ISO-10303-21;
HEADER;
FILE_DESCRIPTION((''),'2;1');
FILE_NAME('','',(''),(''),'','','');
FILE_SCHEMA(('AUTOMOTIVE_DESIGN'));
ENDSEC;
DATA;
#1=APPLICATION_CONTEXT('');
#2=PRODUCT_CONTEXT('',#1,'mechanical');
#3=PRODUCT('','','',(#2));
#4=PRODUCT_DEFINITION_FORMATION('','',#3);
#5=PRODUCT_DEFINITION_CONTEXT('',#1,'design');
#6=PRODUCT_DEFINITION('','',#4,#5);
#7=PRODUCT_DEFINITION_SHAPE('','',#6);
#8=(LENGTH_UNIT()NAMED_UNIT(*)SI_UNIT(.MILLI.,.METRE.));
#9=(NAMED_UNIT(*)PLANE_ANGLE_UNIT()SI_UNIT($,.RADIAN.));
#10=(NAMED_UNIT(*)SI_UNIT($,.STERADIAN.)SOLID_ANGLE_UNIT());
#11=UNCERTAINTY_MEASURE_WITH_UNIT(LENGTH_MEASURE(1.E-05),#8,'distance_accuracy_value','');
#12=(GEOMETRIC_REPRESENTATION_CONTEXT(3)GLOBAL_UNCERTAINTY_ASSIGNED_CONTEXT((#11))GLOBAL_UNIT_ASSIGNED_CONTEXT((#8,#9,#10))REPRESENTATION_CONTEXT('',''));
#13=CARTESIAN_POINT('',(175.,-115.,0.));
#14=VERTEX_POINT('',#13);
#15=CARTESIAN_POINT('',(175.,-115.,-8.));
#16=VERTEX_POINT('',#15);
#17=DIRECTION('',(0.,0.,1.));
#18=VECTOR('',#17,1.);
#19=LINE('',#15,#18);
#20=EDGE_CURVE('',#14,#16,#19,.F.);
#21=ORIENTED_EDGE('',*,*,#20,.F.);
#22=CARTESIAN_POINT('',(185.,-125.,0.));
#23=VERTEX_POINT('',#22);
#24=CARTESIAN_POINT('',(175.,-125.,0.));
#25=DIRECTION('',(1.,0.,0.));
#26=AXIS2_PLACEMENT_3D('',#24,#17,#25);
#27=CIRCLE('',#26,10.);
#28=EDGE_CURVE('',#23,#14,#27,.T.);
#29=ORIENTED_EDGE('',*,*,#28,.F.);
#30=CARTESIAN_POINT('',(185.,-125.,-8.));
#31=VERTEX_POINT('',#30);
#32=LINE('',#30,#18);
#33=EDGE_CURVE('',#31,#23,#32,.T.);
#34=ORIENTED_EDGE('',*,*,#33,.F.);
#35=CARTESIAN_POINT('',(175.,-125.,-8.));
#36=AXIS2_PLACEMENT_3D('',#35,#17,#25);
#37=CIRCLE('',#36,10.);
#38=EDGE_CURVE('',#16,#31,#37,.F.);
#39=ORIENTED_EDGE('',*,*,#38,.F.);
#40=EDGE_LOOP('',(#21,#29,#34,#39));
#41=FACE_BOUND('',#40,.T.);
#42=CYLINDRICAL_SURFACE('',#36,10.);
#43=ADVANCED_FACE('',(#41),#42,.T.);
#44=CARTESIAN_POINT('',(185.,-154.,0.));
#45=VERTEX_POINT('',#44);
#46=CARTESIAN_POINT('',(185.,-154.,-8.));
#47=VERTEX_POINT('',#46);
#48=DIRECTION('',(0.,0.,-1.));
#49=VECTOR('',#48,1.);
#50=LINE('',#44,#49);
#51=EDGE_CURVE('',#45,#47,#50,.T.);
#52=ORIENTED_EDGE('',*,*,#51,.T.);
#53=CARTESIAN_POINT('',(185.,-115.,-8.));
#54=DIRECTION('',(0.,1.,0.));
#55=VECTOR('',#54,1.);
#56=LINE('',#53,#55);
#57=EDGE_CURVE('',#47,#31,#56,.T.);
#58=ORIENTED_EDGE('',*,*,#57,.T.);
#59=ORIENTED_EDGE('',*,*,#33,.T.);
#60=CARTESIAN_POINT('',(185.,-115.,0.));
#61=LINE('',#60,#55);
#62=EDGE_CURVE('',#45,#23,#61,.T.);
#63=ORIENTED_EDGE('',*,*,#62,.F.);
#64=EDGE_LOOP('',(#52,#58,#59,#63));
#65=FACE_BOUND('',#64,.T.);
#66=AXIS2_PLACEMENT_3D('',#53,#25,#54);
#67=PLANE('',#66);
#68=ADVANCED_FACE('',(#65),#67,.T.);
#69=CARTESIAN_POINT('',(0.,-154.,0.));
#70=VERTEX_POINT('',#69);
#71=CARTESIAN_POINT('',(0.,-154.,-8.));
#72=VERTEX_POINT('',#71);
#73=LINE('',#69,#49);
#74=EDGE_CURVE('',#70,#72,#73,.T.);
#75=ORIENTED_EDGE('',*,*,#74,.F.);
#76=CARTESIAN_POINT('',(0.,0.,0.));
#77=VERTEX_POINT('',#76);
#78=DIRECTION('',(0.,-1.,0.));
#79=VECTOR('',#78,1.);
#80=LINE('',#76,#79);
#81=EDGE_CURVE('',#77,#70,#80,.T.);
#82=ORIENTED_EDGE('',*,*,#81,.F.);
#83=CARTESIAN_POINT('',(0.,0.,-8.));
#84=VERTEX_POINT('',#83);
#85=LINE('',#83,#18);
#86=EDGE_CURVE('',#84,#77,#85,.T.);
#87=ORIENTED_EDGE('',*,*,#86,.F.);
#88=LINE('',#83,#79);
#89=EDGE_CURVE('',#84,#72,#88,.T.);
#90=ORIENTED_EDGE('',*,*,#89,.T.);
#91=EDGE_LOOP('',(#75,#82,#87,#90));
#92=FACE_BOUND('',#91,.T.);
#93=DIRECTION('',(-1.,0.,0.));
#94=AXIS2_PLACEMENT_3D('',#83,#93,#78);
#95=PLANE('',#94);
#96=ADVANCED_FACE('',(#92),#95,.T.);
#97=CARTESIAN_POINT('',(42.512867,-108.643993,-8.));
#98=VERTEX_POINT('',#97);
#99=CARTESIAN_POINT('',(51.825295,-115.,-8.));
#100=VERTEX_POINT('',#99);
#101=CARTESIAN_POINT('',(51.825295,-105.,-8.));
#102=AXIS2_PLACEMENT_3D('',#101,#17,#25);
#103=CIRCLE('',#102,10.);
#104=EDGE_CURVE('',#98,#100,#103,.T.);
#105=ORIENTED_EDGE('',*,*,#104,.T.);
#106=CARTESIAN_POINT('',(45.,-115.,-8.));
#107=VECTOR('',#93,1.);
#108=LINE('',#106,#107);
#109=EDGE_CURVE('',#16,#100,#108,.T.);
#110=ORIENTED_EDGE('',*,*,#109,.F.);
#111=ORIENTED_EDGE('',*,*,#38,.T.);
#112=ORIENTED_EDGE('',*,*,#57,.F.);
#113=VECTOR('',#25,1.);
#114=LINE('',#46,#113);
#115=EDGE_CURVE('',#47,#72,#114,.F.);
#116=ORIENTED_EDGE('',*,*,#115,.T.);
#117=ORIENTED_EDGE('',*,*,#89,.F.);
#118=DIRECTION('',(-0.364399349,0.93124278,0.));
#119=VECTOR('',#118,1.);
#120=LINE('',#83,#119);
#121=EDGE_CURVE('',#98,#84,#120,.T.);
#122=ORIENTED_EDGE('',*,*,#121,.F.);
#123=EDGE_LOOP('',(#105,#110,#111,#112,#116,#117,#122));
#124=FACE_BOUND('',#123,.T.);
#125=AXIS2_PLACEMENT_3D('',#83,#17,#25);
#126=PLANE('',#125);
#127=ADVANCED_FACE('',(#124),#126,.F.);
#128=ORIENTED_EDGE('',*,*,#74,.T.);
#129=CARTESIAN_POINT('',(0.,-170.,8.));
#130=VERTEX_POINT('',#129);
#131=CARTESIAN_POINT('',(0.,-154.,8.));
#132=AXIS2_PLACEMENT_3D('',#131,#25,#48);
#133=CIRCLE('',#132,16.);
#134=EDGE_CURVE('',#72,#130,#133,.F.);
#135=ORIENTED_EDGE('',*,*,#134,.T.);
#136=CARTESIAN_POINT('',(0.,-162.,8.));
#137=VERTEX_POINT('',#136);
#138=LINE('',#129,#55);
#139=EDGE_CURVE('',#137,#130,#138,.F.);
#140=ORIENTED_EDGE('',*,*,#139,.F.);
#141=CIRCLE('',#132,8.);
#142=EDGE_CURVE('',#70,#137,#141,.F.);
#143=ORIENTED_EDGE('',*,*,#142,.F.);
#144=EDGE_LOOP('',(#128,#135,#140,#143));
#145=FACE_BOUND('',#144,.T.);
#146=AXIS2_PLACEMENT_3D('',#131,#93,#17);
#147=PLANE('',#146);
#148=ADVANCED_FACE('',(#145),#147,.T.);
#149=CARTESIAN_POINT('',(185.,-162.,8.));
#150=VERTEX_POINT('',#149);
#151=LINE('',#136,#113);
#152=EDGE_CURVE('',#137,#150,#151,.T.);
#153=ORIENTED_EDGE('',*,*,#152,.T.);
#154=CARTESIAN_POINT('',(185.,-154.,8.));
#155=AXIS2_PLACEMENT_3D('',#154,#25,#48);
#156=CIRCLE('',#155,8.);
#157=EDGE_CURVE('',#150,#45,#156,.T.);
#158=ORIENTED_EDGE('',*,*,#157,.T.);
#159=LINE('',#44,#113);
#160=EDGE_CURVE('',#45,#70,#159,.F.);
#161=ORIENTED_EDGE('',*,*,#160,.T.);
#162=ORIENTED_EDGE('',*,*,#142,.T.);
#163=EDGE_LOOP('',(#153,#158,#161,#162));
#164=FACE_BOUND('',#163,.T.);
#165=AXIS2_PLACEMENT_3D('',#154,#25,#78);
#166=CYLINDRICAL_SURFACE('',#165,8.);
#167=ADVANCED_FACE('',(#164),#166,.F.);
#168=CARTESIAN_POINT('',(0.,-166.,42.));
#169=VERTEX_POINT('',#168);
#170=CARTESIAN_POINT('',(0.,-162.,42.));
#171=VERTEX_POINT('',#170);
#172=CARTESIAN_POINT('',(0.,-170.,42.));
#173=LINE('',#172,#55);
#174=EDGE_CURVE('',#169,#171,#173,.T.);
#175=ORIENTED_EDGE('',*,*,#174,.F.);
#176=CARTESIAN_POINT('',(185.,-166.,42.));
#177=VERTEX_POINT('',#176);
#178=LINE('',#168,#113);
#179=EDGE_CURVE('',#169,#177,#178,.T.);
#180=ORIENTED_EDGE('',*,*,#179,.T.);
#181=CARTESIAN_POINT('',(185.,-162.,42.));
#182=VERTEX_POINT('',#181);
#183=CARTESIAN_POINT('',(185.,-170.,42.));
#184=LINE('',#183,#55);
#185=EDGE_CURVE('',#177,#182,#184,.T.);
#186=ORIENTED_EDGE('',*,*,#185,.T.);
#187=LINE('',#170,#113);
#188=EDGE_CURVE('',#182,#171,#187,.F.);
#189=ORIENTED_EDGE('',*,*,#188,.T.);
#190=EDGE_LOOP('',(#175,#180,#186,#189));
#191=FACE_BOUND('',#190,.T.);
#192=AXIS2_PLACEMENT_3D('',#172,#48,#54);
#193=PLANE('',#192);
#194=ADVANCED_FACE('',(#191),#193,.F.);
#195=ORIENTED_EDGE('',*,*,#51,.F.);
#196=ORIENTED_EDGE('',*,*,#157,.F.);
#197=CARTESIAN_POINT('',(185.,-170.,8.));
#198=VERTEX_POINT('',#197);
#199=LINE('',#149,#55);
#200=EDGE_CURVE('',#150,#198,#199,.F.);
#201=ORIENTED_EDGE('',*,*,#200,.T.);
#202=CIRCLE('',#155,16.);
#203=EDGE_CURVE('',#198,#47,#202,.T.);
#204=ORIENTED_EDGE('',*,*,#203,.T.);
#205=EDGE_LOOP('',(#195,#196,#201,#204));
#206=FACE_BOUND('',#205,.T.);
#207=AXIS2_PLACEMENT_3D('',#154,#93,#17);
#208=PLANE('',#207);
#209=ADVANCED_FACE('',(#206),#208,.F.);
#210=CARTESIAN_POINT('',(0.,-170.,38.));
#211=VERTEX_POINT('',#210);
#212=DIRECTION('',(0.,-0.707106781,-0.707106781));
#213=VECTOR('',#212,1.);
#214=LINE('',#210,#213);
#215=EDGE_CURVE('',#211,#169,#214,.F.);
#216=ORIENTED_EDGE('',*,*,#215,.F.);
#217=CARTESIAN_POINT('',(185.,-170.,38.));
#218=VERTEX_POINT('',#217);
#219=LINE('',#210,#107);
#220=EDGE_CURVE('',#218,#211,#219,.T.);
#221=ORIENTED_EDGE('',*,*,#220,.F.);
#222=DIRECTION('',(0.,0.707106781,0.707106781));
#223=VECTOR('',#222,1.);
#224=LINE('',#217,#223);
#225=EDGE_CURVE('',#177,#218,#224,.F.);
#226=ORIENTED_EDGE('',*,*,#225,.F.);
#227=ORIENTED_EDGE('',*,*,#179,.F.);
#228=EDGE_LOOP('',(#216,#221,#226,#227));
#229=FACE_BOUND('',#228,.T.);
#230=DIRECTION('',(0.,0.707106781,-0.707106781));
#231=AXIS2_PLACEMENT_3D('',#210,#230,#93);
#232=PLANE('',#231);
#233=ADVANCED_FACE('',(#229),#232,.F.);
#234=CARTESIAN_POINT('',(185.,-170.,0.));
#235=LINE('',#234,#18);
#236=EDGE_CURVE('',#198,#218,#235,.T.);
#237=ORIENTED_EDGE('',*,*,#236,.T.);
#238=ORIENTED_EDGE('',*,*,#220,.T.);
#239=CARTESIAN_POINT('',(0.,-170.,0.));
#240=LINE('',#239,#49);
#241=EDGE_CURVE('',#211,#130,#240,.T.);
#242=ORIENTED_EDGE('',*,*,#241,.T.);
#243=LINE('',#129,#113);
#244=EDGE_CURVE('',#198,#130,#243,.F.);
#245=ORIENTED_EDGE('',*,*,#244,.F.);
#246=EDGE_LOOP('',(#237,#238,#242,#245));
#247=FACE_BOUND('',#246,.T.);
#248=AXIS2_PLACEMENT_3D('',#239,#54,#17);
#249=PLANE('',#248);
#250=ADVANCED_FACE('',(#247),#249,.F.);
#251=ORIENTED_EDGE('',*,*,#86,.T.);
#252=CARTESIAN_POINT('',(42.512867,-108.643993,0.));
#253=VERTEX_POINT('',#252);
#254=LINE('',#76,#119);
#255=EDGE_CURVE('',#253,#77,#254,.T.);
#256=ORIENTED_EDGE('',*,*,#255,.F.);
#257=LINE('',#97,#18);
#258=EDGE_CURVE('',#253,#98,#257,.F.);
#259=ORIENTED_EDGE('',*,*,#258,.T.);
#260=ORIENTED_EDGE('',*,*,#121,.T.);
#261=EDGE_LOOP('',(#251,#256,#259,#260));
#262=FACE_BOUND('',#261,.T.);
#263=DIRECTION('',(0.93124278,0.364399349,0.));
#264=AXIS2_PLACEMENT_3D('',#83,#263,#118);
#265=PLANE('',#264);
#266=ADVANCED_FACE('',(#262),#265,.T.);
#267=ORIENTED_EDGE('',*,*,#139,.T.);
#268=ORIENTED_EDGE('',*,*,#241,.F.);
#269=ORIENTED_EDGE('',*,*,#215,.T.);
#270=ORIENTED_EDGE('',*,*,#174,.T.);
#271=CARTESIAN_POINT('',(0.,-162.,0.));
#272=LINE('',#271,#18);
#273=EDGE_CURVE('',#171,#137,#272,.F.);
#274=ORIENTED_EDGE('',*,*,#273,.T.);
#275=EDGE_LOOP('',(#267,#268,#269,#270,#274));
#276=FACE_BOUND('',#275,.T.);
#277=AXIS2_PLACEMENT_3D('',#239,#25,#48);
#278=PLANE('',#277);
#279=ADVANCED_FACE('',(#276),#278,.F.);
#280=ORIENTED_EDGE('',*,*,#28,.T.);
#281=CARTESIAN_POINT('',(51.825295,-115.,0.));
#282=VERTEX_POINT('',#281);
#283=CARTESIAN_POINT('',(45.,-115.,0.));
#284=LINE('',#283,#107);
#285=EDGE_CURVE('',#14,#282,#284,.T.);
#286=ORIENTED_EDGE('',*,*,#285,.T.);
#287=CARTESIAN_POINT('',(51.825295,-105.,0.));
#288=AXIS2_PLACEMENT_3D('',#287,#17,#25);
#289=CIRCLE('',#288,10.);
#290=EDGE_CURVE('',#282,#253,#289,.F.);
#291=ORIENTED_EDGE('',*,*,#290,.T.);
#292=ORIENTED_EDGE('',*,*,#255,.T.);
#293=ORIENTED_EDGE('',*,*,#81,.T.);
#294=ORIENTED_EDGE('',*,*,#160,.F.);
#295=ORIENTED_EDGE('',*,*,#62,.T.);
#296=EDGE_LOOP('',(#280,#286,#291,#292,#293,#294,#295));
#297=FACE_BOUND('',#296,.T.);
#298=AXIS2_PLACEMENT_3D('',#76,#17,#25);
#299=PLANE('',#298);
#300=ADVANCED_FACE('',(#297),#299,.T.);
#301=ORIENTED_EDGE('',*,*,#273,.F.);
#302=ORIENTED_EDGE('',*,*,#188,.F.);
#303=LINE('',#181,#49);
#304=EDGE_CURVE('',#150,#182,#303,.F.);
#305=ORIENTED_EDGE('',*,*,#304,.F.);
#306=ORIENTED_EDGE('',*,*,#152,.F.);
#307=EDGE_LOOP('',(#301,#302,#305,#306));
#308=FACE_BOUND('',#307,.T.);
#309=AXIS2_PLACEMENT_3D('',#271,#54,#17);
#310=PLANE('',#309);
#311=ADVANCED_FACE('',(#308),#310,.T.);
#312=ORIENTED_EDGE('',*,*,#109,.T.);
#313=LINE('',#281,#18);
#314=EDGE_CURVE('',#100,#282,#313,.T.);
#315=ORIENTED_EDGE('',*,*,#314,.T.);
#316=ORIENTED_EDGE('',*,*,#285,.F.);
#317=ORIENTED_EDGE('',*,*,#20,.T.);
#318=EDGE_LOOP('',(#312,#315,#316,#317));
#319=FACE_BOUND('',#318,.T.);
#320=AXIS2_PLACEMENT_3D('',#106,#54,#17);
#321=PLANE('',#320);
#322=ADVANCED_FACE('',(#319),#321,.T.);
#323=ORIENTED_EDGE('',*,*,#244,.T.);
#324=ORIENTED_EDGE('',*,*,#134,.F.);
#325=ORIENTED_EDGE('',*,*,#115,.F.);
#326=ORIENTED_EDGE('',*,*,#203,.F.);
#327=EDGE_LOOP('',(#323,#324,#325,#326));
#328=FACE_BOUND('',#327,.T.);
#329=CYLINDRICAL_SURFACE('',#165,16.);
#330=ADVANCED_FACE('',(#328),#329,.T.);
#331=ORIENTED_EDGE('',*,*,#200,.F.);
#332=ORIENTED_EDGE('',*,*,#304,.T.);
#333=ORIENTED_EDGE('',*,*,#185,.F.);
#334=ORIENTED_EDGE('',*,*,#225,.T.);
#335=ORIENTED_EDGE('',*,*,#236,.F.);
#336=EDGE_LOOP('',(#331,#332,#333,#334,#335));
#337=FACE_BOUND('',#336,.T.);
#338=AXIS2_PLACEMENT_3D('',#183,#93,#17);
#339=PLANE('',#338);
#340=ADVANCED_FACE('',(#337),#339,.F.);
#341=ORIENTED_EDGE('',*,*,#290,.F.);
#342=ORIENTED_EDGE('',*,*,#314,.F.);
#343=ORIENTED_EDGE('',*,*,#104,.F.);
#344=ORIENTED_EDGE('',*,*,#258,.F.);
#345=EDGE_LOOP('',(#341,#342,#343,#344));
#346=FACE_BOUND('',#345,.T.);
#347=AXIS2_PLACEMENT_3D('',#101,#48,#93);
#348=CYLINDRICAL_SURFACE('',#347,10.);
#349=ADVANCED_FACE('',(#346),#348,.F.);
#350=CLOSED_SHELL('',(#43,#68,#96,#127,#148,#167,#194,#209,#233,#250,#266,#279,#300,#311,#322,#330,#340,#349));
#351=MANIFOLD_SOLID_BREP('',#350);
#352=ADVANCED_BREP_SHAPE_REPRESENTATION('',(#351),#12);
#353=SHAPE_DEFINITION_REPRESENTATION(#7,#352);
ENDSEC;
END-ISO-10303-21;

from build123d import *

# Parameters (mm, degrees)
SM_BASE_FLANGE_1_DEPTH           = 8
SM_EDGE_FLANGE_1_STRIP_W         = 48
SM_EDGE_FLANGE_1_STRIP_H         = 8
SM_EDGE_FLANGE_1_STRIP_CUT_DEPTH = 185
SM_EDGE_FLANGE_1_DEPTH           = 185
FILLET_1_R                       = 10
CHAMFER_1_SIZE                   = 4


# Sheet-metal steps are written as plain solids
with BuildPart() as part:
    # Sketch 1 → 基体-法兰1 (new body)
    with BuildSketch(Plane.XY):
        Polygon((0, 0), (45, -115), (185, -115), (185, -170), (0, -170), align=None)
    extrude(amount=-SM_BASE_FLANGE_1_DEPTH)

    # 边线-法兰1 strip (across the edge) → 边线-法兰1 strip cut (cut)
    with BuildSketch(Plane(origin=(0, -170, 0), x_dir=(0, 1, 0), z_dir=(1, 0, 0))):
        with Locations((-8, -4)):
            Rectangle(SM_EDGE_FLANGE_1_STRIP_W, SM_EDGE_FLANGE_1_STRIP_H)
    extrude(amount=SM_EDGE_FLANGE_1_STRIP_CUT_DEPTH, mode=Mode.SUBTRACT)

    # 边线-法兰1 section (across the edge) → 边线-法兰1 (add)
    with BuildSketch(Plane(origin=(0, -170, 0), x_dir=(0, 1, 0), z_dir=(1, 0, 0))):
        with BuildLine():
            Line((0, 8), (0, 42))
            Line((0, 42), (8, 42))
            Line((8, 42), (8, 8))
            ThreePointArc((8, 8), (10.343145751, 2.343145751), (16, 0))
            Line((16, 0), (16, -8))
            ThreePointArc((16, -8), (4.686291501, -3.313708499), (0, 8))
        make_face()
    extrude(amount=SM_EDGE_FLANGE_1_DEPTH)

    # 圆角1
    fillet_1_edges = [part.edges().sort_by_distance(p)[0] for p in [
        (45, -115, -4),
        (185, -115, -4),
    ]]
    fillet(fillet_1_edges, radius=FILLET_1_R)

    # 倒角1
    chamfer_1_edges = [part.edges().sort_by_distance(p)[0] for p in [
        (92.5, -170, 42),
    ]]
    chamfer(chamfer_1_edges, length=CHAMFER_1_SIZE)


solid = part.part
